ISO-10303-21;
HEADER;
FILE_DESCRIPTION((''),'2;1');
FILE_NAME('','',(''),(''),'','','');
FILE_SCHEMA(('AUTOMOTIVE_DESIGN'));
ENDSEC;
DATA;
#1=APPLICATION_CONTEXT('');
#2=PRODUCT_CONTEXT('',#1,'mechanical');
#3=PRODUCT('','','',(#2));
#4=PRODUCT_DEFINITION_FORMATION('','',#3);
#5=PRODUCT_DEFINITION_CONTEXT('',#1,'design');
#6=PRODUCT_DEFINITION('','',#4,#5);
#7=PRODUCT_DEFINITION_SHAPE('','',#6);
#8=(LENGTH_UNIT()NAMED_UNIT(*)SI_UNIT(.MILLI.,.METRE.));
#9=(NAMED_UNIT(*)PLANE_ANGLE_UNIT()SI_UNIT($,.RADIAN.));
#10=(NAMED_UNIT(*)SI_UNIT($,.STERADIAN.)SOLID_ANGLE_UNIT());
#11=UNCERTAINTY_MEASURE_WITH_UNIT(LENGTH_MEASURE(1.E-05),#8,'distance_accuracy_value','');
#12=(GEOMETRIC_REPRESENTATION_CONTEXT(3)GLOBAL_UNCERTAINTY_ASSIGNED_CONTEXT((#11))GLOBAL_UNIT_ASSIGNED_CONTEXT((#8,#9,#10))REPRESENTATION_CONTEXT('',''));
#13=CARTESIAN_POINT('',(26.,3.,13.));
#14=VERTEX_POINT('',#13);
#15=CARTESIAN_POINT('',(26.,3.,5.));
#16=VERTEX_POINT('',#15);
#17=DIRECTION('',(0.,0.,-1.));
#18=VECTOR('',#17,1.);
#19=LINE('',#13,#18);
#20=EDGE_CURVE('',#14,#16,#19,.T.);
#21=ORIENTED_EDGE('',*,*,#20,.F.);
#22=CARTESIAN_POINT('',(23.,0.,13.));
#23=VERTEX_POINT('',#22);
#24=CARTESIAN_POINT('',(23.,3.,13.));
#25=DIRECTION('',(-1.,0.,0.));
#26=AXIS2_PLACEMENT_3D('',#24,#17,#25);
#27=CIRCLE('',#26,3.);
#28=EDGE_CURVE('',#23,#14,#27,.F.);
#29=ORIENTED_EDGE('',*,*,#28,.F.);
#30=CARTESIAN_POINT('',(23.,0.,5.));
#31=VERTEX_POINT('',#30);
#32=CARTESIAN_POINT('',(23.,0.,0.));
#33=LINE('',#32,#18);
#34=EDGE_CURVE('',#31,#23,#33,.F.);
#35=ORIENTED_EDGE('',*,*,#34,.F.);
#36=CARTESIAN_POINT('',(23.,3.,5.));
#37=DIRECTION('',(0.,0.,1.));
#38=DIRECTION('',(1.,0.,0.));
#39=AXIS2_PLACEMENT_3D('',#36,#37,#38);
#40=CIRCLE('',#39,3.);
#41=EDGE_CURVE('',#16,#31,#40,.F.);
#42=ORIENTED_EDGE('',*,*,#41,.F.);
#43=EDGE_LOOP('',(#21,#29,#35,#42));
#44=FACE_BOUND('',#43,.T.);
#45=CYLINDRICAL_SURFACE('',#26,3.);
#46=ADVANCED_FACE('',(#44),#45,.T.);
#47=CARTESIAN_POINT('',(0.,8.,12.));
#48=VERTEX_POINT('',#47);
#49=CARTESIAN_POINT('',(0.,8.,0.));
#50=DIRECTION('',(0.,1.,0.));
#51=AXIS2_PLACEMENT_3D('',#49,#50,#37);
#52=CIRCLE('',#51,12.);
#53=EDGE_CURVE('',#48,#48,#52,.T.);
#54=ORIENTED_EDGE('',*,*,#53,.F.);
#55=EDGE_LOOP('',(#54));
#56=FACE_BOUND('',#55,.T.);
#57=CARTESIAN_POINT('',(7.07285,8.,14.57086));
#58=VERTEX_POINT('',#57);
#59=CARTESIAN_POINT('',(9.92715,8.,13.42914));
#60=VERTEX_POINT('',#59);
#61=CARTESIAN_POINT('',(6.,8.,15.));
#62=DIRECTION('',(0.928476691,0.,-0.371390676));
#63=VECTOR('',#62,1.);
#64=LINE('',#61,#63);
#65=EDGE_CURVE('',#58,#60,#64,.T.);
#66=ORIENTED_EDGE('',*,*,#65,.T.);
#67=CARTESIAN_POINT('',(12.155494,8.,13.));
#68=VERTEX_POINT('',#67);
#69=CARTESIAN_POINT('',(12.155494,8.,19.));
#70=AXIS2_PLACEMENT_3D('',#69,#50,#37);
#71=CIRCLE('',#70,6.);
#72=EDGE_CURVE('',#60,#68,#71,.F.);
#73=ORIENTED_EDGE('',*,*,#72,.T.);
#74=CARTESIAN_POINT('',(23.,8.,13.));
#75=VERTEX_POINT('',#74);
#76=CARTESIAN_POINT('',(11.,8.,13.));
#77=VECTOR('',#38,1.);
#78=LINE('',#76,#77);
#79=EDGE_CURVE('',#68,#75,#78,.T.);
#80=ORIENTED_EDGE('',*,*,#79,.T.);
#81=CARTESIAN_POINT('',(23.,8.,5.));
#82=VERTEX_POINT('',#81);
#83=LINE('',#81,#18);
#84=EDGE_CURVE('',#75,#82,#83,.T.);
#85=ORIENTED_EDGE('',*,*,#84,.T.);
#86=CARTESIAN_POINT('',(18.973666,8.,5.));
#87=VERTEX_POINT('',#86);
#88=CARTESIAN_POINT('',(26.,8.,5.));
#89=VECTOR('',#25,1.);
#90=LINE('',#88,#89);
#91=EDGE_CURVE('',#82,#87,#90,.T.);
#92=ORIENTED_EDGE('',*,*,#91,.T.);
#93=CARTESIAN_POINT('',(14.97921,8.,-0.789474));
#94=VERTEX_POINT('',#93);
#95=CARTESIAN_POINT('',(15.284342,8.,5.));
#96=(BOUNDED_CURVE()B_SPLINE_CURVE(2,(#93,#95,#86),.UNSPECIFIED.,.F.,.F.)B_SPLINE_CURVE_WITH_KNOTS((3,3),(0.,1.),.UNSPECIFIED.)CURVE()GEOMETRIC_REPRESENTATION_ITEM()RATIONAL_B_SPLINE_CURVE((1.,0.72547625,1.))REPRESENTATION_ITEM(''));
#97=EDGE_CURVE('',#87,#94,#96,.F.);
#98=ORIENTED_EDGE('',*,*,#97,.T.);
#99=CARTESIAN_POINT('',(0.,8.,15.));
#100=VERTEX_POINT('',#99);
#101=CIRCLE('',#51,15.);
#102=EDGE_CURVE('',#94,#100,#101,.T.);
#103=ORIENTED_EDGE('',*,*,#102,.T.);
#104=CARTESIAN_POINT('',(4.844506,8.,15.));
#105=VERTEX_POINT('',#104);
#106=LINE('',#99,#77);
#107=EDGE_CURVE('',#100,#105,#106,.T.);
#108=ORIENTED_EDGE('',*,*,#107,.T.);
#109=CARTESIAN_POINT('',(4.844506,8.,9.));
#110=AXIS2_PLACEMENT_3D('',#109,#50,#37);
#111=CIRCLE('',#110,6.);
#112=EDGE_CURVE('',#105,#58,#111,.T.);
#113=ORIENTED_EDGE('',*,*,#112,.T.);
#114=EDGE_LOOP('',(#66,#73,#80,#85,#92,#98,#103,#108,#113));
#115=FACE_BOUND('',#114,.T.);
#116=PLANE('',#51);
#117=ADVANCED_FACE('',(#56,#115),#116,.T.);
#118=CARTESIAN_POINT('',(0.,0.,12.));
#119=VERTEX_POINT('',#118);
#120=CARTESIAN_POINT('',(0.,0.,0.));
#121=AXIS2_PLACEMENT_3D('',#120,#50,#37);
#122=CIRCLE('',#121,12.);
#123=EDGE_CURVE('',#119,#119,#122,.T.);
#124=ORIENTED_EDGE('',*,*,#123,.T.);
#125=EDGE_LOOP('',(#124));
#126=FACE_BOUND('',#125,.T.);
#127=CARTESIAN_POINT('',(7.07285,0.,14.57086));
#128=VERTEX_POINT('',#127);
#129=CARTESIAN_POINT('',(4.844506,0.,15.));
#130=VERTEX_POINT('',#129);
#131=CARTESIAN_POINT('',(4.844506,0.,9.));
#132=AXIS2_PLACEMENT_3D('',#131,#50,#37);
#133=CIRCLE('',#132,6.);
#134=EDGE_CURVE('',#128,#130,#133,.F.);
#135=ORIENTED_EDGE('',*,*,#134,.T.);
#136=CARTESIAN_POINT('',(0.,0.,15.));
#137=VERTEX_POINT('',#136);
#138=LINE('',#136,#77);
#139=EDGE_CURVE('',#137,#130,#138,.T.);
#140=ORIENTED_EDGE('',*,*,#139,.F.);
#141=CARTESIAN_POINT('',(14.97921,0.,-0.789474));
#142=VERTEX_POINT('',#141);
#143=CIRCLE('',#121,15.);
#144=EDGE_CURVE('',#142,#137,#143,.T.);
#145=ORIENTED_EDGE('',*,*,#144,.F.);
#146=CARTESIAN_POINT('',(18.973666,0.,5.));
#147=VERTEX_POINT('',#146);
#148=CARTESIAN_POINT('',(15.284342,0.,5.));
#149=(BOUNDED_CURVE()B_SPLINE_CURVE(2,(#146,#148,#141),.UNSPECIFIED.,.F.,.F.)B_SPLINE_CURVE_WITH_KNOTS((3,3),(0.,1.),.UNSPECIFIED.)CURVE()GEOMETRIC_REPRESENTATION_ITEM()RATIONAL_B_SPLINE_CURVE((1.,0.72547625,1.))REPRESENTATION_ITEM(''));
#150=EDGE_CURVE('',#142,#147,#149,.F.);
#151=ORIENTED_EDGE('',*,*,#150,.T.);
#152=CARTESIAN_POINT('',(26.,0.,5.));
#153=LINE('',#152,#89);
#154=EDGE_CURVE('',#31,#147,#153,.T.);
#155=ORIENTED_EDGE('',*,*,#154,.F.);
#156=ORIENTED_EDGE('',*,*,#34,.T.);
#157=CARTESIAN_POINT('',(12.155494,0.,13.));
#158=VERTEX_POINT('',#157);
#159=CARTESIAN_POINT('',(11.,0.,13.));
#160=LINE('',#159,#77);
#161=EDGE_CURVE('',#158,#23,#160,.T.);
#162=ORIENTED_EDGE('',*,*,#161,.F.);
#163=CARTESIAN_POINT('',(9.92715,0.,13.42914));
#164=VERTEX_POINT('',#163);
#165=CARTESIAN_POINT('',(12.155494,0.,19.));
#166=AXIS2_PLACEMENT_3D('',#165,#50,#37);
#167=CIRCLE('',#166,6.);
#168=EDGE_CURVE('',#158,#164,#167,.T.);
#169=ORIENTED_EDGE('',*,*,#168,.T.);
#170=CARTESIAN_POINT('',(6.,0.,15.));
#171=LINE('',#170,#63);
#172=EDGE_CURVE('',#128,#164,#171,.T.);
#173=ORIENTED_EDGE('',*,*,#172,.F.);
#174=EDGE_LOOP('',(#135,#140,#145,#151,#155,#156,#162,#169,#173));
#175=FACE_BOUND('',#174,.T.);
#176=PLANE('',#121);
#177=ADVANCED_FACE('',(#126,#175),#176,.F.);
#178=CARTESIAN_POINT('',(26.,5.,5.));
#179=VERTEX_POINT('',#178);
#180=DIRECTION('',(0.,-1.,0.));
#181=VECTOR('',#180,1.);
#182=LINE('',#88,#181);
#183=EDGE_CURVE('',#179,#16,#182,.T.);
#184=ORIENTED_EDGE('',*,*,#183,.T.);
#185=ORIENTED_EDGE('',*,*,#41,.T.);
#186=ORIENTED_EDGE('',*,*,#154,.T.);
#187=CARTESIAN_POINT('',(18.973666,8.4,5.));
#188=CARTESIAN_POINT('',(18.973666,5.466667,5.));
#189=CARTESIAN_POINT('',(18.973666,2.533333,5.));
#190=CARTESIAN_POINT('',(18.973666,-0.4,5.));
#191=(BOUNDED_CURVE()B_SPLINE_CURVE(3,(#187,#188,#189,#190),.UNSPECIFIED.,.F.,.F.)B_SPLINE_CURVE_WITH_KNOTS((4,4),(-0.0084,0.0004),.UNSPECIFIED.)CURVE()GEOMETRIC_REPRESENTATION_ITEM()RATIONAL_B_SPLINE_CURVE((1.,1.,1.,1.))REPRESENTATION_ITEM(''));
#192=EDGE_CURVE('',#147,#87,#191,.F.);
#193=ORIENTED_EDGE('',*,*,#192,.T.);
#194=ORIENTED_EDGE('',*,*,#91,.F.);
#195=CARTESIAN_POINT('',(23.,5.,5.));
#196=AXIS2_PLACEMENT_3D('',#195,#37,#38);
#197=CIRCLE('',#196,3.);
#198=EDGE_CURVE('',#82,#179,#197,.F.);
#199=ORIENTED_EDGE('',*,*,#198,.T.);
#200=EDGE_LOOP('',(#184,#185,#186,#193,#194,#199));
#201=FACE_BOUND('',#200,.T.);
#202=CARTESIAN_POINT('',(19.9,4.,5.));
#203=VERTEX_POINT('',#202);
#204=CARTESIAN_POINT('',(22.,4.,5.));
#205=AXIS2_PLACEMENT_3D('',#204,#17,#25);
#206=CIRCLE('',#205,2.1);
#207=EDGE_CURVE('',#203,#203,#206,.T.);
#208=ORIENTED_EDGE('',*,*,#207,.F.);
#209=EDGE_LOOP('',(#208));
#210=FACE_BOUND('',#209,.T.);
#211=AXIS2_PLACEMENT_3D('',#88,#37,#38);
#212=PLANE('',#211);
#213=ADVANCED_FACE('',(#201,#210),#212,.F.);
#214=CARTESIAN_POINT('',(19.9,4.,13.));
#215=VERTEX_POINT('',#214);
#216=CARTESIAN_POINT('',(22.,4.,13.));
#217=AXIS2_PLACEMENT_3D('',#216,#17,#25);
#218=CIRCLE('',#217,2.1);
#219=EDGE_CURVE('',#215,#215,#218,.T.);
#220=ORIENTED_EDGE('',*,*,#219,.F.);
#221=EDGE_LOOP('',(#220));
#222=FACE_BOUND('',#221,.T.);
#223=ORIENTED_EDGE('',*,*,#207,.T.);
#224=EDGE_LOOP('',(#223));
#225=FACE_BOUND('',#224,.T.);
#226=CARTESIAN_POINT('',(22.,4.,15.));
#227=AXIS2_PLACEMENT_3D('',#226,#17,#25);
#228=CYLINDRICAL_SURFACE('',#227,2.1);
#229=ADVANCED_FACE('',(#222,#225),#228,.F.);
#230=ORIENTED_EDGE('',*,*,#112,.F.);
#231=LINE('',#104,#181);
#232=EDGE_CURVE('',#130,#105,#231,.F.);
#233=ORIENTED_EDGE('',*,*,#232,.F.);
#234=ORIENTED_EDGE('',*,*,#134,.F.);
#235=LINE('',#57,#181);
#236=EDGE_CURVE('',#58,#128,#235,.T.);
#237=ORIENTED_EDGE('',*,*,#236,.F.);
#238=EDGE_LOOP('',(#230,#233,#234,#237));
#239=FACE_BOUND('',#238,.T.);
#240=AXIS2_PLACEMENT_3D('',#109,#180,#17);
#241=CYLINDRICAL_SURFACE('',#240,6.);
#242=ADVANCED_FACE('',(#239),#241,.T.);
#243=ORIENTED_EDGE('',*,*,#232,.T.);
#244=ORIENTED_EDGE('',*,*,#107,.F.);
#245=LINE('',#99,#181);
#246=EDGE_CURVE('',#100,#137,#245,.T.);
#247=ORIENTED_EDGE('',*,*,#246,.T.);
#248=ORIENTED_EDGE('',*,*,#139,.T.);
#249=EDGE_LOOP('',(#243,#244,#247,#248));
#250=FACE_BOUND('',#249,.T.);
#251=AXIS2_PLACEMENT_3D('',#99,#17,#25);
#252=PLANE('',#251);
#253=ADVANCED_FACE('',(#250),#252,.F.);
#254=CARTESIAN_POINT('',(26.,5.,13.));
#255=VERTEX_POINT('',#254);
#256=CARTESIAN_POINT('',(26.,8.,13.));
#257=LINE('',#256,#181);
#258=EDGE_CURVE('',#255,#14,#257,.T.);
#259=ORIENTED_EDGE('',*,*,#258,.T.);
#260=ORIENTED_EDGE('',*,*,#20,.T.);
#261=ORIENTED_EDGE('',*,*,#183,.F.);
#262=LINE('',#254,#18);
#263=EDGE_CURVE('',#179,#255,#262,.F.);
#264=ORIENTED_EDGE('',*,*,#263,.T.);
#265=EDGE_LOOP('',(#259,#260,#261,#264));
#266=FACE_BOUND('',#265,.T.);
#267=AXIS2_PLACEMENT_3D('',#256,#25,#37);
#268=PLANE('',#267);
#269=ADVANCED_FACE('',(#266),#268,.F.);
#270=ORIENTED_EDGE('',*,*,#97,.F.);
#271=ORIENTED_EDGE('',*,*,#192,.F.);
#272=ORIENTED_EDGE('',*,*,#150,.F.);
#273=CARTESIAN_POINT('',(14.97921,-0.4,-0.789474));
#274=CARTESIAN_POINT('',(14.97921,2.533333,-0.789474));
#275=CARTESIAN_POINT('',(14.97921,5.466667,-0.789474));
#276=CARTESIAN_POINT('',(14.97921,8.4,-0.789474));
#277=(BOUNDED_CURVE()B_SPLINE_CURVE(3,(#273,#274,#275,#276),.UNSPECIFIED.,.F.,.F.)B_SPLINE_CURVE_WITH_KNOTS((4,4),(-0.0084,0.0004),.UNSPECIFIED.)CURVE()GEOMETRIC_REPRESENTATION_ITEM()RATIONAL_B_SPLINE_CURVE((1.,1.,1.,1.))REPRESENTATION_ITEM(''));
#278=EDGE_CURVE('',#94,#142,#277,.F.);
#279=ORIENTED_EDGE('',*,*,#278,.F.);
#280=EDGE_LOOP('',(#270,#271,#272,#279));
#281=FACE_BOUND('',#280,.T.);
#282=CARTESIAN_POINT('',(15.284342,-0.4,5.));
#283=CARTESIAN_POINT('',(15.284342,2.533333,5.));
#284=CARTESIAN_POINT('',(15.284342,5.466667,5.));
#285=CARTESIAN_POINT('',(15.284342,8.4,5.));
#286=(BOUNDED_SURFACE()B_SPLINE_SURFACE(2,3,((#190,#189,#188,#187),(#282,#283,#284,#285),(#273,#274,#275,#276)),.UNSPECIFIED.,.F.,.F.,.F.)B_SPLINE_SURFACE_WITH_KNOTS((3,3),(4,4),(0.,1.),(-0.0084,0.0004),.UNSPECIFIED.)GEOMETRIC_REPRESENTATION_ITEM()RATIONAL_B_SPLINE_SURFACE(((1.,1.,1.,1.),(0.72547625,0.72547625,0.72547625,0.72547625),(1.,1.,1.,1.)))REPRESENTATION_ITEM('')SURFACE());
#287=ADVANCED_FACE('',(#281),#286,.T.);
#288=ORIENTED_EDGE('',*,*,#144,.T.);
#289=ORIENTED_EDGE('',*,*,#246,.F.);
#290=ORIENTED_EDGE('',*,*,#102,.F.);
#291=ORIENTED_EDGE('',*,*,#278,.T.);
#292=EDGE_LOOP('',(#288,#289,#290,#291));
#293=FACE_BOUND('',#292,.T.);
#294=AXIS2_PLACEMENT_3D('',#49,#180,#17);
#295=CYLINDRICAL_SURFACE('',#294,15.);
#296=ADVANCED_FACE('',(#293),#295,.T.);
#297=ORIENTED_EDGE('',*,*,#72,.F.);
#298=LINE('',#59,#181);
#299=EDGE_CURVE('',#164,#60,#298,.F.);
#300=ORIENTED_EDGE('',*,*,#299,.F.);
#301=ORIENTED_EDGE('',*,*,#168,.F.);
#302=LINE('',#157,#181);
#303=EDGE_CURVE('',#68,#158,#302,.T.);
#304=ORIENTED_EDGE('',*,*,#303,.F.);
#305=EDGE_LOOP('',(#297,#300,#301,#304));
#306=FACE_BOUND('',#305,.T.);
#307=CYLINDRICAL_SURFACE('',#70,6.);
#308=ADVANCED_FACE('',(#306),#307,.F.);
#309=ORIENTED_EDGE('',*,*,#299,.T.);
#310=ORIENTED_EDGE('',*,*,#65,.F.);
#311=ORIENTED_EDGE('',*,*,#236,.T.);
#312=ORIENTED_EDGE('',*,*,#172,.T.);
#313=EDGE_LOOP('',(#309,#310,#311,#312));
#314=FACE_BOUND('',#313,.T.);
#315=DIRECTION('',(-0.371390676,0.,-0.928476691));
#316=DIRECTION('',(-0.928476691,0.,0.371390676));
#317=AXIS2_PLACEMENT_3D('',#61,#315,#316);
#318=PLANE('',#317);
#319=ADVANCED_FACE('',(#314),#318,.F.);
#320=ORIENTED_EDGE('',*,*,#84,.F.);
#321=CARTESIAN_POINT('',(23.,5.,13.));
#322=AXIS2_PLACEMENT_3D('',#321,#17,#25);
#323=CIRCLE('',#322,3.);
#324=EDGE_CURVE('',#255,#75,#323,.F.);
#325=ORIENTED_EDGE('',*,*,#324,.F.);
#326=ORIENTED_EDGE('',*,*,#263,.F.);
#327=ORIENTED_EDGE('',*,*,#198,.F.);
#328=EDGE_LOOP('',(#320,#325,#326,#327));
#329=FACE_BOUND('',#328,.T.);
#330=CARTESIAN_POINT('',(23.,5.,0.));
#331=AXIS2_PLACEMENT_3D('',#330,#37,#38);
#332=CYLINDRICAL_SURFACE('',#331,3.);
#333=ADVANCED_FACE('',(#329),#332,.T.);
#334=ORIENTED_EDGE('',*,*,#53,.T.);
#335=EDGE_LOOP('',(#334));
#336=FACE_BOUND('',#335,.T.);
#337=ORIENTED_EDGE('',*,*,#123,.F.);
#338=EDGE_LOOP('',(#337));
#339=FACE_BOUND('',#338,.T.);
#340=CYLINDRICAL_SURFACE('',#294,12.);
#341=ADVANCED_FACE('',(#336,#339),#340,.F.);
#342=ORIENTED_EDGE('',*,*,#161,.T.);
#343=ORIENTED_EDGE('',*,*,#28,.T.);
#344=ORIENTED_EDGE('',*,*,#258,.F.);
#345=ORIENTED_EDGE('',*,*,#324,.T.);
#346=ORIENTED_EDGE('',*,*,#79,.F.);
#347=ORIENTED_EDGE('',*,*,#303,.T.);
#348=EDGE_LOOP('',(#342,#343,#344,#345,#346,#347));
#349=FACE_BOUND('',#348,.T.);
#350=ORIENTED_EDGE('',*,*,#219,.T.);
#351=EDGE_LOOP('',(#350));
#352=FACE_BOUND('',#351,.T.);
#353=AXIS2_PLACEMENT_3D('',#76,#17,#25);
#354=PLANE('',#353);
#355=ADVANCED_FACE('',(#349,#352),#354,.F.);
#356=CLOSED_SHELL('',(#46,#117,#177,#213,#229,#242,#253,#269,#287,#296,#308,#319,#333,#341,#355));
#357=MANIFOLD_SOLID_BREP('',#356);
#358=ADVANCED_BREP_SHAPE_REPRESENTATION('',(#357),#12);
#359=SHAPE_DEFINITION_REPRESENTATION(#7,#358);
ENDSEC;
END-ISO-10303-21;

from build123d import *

# Parameters (mm, degrees)
SKETCH1_R           = 12
BOSS_EXTRUDE1_DEPTH = 8
FILLET2_R           = 6
SKETCH2_R           = 2.1
CUT_EXTRUDE1_DEPTH  = 34.763886032
FILLET3_DEPTH       = 8
FILLET4_R           = 3


with BuildPart() as part:
    # Sketch1 → Boss-Extrude1 (new body)
    with BuildSketch(Plane(origin=(0, 0, 0), x_dir=(1, 0, 0), z_dir=(0, 1, 0))):
        with BuildLine():
            Line((0, -15), (6, -15))
            Line((6, -15), (11, -13))
            Line((11, -13), (26, -13))
            Line((26, -13), (26, -5))
            Line((26, -5), (15, -5))
            Line((15, -5), (15, 0))
            ThreePointArc((15, 0), (-10.606601718, 10.606601718), (0, -15))
        make_face()
        with Locations(Location((0, 0, 0), (0, 0, 270))):
            Circle(SKETCH1_R, mode=Mode.SUBTRACT)
    extrude(amount=BOSS_EXTRUDE1_DEPTH)

    # Fillet2
    fillet2_edges = [part.edges().sort_by_distance(p)[0] for p in [
        (11, 4, 13),
        (6, 4, 15),
    ]]
    fillet(fillet2_edges, radius=FILLET2_R)

    # Sketch2 → Cut-Extrude1 (cut, through all)
    with BuildSketch(Plane(origin=(0, 0, 5), x_dir=(-1, 0, 0), z_dir=(0, 0, -1))):
        with Locations((-22, 4)):
            Circle(SKETCH2_R)
    extrude(amount=-CUT_EXTRUDE1_DEPTH, mode=Mode.SUBTRACT)

    # Fillet3: read off the stored shape, not the designer's step
    # Fillet3 outline → Fillet3 (add)
    with BuildSketch(Plane(origin=(0, 0, 0), x_dir=(1, 0, 0), z_dir=(0, 1, 0))):
        with BuildLine():
            Line((15, -5), (18.973665961, -5))
            add(Edge.make_bspline(
                [(18.973665961, -5), (15.284342024, -5), (14.979209969, 0.789473684)],
                knots=[0, 0, 0, 1, 1, 1], degree=2, weights=[1, 0.72547625, 1]))
            ThreePointArc((14.979209969, 0.789473684), (14.994801592, 0.39487369), (15, 0))
            Line((15, 0), (15, -5))
        make_face()
    extrude(amount=FILLET3_DEPTH)

    # Fillet4
    fillet4_edges = [part.edges().sort_by_distance(p)[0] for p in [
        (26, 0, 9),
        (26, 8, 9),
    ]]
    fillet(fillet4_edges, radius=FILLET4_R)


solid = part.part
